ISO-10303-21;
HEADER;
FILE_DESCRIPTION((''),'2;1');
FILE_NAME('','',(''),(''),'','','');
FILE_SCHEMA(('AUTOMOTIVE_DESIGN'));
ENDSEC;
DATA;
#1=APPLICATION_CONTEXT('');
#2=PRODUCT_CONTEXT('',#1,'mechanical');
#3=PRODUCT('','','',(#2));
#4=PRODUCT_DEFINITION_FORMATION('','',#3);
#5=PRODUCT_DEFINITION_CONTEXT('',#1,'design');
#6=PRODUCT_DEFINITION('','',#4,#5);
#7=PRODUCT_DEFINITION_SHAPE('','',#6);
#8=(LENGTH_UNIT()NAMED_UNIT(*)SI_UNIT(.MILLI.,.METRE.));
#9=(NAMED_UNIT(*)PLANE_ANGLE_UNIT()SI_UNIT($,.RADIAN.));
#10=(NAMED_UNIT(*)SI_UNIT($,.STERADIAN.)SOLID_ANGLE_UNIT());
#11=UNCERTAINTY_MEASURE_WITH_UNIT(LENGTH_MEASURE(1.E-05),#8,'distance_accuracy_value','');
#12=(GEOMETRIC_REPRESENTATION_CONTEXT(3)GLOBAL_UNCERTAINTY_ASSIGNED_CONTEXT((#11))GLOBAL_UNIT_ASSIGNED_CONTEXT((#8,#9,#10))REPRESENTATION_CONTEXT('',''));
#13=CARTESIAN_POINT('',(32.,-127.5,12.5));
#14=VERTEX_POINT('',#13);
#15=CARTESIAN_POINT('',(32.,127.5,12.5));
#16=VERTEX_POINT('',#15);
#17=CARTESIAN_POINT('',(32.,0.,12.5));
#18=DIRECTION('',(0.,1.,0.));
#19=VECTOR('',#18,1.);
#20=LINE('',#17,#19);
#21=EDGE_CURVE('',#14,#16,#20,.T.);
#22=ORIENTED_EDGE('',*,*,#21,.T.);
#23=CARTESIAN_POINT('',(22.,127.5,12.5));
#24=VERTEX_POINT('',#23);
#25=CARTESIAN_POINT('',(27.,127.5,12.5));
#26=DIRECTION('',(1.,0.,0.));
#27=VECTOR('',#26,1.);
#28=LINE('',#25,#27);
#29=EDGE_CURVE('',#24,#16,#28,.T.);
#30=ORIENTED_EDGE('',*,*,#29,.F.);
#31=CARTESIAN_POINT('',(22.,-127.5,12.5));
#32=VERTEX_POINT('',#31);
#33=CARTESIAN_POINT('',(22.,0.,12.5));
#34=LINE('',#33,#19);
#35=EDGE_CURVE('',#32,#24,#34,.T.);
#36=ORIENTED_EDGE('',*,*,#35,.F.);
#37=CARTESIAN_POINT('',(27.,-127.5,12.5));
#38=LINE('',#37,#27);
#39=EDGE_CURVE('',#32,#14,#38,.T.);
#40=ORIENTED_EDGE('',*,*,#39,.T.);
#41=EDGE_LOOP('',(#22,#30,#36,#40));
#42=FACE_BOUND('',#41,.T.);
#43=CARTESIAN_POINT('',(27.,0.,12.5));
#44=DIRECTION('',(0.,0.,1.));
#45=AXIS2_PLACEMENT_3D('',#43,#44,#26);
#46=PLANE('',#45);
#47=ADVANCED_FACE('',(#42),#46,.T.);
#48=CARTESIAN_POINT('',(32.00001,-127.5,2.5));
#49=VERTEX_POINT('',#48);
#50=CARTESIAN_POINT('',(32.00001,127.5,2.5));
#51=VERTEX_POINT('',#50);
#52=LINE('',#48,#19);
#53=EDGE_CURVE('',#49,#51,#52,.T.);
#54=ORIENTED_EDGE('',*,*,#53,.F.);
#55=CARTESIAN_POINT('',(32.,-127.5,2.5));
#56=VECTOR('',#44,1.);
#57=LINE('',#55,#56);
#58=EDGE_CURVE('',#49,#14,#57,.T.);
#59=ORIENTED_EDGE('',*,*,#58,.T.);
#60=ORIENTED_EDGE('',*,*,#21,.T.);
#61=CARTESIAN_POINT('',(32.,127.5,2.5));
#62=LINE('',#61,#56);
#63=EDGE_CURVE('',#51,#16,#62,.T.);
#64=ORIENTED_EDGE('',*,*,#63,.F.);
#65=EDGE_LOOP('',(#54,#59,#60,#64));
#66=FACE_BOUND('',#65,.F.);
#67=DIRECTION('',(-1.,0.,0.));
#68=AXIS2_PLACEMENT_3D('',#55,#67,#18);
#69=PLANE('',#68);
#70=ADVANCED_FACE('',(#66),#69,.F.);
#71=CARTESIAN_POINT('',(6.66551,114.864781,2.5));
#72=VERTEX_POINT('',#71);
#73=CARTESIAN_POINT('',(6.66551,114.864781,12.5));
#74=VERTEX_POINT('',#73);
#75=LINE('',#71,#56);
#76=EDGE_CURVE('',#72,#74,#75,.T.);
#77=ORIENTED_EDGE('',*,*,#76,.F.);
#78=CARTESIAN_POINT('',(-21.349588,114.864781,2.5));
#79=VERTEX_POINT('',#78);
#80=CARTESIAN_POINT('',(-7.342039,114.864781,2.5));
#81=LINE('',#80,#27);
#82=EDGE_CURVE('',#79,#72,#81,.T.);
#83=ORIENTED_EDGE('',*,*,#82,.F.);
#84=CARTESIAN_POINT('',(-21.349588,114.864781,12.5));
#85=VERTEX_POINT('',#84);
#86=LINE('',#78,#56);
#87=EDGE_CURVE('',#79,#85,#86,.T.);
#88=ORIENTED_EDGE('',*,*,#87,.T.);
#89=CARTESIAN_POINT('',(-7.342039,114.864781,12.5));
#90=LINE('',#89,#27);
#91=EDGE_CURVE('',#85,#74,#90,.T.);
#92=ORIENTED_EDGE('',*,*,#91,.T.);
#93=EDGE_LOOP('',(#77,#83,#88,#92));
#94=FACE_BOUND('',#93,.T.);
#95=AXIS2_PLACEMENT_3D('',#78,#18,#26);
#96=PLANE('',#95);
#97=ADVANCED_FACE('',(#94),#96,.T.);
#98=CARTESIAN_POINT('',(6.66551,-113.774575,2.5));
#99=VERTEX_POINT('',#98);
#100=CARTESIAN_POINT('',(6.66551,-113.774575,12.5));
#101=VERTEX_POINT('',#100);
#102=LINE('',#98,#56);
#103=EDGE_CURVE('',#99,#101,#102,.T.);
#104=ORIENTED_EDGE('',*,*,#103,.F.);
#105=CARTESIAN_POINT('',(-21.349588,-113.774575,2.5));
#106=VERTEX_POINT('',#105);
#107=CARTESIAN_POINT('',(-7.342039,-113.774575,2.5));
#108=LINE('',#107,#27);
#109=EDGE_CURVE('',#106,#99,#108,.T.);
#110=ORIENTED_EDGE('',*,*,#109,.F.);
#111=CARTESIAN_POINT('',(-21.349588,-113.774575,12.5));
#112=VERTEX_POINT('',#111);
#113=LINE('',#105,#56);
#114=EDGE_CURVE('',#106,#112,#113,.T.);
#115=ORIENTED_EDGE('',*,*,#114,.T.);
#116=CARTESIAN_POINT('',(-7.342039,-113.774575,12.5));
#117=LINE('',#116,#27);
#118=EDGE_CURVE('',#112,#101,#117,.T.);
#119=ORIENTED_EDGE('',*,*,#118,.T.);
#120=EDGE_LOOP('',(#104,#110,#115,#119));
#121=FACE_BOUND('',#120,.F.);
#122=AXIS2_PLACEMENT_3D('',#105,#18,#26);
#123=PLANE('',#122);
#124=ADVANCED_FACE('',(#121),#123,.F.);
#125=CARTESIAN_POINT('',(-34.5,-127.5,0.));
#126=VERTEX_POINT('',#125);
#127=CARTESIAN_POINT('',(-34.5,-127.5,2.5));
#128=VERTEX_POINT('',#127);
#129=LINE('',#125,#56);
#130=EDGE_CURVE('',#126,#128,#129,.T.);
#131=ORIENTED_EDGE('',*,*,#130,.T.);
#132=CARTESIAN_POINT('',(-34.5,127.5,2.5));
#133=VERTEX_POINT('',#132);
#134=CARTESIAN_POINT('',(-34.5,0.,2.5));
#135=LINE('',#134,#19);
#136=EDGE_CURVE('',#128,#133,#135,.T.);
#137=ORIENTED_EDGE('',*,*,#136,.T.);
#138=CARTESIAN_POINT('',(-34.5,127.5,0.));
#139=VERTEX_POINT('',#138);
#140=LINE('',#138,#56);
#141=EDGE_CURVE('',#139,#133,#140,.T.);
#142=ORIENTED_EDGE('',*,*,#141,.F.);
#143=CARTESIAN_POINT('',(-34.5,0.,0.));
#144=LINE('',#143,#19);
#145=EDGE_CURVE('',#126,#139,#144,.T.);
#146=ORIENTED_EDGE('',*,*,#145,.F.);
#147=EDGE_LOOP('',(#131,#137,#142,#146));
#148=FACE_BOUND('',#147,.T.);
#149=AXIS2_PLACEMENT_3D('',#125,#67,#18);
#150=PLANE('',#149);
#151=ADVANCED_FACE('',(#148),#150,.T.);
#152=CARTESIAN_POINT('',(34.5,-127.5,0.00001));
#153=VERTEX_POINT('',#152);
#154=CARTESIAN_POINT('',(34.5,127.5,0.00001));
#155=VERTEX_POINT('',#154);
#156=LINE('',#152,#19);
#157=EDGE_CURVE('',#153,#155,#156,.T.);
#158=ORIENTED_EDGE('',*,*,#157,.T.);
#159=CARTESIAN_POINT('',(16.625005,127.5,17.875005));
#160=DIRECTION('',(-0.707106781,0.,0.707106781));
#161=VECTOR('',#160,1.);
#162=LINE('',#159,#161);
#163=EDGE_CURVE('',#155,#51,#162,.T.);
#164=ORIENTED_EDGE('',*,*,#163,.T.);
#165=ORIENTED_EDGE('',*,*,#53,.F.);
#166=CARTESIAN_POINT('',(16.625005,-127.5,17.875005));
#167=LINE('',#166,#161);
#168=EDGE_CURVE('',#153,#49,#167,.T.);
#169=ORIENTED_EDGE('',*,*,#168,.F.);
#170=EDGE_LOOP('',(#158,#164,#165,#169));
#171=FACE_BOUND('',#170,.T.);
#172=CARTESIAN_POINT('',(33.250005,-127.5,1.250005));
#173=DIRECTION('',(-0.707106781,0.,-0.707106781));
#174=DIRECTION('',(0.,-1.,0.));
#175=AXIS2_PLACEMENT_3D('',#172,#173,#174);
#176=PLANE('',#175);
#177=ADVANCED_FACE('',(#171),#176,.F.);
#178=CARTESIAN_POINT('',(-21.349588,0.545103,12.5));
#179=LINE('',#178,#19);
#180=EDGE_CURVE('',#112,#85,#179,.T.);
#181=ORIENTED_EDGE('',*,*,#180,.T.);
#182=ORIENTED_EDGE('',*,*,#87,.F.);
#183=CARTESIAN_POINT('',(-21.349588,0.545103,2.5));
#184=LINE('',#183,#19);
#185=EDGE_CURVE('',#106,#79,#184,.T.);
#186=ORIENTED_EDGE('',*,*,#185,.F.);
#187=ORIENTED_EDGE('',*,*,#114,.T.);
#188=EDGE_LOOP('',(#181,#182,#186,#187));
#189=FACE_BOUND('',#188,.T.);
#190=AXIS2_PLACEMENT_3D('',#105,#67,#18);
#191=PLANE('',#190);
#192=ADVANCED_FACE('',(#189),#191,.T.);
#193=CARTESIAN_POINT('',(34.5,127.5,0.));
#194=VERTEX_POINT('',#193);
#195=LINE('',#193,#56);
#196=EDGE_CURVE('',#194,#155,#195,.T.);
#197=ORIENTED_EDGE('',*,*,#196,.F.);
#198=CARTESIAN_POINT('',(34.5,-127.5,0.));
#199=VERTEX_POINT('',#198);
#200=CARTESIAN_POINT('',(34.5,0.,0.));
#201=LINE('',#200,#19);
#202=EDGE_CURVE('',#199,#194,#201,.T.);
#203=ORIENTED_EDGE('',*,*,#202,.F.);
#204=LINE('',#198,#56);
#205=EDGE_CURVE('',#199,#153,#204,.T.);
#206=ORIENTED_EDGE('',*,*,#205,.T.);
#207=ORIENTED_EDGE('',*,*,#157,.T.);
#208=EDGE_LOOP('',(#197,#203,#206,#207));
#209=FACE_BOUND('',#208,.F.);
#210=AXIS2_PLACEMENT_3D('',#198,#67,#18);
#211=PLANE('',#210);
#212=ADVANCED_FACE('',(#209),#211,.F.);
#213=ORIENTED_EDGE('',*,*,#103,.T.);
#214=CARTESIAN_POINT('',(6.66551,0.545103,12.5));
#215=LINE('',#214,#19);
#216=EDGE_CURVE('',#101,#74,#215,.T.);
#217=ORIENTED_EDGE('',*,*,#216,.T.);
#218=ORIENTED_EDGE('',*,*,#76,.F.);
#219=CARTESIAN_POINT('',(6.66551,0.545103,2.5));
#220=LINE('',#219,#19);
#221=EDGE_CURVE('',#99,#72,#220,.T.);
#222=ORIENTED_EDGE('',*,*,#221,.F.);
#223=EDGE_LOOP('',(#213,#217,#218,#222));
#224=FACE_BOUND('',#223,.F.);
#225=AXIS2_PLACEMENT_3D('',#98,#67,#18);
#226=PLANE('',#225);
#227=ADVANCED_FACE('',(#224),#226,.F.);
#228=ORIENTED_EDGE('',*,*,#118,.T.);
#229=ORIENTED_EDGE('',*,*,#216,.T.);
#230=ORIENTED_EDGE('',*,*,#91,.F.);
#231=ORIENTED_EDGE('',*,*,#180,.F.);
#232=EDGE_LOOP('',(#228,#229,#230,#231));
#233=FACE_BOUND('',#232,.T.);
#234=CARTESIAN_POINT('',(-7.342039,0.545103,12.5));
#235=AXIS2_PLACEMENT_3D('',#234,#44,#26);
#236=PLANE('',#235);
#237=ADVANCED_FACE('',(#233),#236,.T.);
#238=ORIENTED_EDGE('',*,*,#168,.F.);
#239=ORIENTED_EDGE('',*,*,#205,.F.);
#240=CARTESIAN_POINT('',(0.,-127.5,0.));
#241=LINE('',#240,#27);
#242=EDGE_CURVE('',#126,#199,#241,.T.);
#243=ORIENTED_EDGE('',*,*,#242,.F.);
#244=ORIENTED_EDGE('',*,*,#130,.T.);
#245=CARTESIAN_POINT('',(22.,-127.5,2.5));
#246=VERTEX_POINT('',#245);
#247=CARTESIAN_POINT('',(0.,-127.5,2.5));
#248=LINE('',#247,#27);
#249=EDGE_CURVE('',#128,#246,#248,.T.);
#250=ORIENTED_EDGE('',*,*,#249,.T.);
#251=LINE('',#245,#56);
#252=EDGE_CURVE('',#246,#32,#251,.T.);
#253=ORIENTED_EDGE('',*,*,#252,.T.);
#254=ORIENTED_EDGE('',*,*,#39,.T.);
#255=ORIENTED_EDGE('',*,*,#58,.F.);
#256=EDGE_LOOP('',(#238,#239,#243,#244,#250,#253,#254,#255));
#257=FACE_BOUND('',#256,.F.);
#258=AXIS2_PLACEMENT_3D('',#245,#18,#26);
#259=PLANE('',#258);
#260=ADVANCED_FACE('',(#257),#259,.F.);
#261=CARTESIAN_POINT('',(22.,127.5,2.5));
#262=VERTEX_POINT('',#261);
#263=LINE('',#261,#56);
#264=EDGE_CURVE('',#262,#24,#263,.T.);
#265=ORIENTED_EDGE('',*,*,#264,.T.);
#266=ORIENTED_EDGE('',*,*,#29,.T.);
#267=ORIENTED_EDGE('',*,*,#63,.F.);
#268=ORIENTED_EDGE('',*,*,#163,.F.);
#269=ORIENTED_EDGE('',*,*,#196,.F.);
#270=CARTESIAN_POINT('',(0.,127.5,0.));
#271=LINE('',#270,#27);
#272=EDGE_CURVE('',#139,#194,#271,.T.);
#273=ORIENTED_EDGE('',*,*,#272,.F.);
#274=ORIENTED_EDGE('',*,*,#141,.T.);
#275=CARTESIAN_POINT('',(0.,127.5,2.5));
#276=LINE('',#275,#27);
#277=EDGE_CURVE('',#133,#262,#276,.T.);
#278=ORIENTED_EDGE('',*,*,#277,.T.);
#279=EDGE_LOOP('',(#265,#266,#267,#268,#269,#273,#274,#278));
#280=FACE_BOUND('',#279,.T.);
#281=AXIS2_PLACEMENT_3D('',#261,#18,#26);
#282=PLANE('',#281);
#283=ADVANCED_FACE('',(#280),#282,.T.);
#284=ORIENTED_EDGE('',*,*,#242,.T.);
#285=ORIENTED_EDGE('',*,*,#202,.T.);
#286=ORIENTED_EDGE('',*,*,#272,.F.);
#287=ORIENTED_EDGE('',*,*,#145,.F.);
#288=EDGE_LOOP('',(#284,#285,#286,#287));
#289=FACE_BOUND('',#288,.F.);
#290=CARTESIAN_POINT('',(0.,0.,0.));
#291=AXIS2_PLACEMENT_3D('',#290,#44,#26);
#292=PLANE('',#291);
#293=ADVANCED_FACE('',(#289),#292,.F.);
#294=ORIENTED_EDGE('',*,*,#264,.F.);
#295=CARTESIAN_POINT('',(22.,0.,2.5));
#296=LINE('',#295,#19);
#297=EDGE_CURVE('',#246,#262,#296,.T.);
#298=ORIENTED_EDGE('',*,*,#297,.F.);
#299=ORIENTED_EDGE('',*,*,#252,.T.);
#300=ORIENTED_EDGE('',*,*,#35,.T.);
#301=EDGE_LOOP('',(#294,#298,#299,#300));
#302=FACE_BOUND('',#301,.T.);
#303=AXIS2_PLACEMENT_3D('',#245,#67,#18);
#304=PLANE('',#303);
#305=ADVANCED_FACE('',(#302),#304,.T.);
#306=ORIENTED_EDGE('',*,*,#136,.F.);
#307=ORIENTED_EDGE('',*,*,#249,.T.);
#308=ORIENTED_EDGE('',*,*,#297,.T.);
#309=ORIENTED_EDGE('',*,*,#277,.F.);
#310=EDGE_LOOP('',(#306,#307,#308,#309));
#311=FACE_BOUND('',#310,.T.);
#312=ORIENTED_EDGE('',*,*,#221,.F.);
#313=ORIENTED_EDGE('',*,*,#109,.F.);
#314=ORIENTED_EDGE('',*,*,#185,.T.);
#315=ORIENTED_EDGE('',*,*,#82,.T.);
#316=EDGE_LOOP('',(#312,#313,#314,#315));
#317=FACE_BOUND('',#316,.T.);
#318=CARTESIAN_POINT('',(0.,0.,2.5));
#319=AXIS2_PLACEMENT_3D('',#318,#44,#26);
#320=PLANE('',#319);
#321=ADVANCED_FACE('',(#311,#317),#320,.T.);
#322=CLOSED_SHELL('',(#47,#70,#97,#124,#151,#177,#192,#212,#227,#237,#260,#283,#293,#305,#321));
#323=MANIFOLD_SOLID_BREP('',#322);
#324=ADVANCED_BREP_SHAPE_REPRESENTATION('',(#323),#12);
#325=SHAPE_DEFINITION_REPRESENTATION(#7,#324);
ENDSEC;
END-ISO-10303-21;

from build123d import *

# Parameters (mm, degrees)
F0_W     = 69
F0_H     = 255
F1_DEPTH = 2.5
F2_SIZE  = 2.49999
F3_W     = 10
F3_H     = 255
F4_DEPTH = 10
F5_W     = 28.0150985345
F5_H     = 228.639356792
F6_DEPTH = 10


# Not quite as in the source:
# - a fillet or chamfer is up to 0.001 mm smaller than in the source, because OpenCascade refuses the exact size


with BuildPart() as f1:
    # F0 (on Top) → F1 (new body)
    with BuildSketch(Plane.XY):
        Rectangle(F0_W, F0_H)
    extrude(amount=F1_DEPTH)

    # F2 (size 2.5 in the source; OpenCascade refuses exactly that, so slightly less here)
    f2_edges = [f1.edges().sort_by_distance(p)[0] for p in [
        (34.5, 0, 2.5),
    ]]
    chamfer(f2_edges, length=F2_SIZE)

    # F3 (on face) → F4 (join)
    with BuildSketch(Plane.XY.offset(2.5)):
        with Locations((27, 0)):
            Rectangle(F3_W, F3_H)
    extrude(amount=F4_DEPTH)

    # F5 (on face) → F6 (join)
    with BuildSketch(Plane.XY.offset(2.5)):
        with Locations((-7.3420391418, 0.5451031029)):
            Rectangle(F5_W, F5_H)
    extrude(amount=F6_DEPTH)


solid = f1.part
